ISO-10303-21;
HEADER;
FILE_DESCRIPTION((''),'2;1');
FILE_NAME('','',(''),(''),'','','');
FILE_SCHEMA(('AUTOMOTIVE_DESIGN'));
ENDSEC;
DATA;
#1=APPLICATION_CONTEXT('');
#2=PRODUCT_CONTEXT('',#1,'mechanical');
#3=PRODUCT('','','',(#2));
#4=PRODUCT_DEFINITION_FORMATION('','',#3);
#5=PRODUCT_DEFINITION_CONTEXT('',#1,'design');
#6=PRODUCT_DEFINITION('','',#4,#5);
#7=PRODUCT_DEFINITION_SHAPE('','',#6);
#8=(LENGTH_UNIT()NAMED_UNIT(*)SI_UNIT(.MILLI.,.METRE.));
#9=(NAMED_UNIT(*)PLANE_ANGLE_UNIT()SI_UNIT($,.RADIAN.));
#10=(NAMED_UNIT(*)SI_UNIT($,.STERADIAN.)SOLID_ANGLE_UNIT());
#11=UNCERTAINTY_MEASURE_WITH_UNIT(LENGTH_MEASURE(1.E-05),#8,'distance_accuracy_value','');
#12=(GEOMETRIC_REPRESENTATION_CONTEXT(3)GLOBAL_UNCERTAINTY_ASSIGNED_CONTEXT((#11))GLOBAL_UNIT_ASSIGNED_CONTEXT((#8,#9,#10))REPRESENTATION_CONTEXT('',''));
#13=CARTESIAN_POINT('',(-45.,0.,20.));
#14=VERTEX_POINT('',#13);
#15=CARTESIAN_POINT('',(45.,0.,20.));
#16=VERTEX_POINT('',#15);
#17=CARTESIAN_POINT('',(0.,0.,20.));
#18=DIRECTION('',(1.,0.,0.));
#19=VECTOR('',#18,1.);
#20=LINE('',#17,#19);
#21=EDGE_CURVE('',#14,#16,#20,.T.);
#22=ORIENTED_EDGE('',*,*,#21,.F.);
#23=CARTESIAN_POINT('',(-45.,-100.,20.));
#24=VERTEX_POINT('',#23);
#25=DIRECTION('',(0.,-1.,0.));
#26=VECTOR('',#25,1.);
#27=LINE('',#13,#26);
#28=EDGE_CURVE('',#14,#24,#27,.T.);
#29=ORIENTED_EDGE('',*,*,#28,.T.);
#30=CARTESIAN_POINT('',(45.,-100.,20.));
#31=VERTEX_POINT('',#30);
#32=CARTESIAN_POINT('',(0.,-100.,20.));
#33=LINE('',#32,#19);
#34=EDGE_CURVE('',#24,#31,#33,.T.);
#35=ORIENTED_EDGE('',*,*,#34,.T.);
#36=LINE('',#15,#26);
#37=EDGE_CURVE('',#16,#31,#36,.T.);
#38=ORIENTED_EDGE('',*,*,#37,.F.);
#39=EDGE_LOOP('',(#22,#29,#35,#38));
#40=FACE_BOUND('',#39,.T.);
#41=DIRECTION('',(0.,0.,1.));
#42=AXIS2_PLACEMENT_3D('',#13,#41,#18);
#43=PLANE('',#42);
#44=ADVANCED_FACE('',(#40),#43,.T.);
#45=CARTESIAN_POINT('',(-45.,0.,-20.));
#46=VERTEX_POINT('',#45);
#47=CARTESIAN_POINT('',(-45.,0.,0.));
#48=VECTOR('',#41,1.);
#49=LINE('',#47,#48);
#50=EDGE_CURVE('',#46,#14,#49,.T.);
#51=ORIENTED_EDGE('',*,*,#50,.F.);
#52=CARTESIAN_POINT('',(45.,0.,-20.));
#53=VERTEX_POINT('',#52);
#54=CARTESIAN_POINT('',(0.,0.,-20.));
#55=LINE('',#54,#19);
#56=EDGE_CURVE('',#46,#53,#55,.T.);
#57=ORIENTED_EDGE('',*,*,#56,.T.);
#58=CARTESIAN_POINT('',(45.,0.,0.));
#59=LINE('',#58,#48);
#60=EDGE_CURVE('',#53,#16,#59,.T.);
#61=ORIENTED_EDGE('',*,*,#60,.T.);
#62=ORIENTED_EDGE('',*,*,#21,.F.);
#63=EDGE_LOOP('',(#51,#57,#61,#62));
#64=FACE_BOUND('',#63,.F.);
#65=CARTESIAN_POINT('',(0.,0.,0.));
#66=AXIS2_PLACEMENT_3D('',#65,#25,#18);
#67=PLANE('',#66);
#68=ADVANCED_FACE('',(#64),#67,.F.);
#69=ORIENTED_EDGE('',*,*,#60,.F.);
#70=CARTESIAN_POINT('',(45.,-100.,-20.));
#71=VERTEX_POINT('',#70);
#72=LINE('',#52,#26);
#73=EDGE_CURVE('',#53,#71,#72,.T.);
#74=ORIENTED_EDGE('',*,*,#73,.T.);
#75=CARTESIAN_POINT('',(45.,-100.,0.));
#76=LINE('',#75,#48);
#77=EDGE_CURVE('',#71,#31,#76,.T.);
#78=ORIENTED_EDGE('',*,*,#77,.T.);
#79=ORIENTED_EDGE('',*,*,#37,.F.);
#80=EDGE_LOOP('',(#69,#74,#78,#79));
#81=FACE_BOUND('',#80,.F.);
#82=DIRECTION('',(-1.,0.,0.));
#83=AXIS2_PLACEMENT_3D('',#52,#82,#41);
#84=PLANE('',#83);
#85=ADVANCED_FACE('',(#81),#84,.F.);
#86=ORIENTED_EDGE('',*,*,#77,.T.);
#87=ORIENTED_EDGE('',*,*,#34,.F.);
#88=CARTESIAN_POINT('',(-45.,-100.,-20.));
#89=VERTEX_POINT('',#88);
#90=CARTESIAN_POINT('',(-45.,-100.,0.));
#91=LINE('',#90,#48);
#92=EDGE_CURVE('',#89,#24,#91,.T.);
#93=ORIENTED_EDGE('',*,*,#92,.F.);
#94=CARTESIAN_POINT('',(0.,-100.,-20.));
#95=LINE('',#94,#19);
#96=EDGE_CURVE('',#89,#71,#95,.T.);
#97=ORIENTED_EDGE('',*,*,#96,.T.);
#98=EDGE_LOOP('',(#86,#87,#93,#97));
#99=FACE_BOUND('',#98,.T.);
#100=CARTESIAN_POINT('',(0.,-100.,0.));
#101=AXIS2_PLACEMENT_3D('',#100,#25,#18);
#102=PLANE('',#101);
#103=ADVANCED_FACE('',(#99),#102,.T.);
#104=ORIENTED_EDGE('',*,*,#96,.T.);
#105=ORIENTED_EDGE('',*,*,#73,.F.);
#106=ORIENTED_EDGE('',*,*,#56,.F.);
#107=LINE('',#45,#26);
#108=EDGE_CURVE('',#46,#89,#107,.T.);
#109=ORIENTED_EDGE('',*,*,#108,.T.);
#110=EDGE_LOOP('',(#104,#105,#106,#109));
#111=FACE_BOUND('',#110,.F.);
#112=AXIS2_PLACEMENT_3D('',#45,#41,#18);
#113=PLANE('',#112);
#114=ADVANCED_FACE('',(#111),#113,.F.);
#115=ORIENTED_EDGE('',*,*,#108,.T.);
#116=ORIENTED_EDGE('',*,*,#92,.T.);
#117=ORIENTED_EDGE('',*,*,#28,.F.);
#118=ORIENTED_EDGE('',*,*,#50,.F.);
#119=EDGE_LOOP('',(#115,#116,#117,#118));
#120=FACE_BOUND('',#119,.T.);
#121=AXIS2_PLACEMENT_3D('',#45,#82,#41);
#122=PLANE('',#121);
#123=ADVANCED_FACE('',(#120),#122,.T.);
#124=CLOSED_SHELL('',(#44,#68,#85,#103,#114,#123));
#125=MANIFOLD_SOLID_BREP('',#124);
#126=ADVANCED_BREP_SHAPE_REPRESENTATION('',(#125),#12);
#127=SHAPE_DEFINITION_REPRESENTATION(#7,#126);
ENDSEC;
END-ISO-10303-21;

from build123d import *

# Parameters (mm, degrees)
F0_W     = 90
F0_H     = 40
F1_DEPTH = 100


# Not quite as in the source:
# - a feature names something its author has since deleted; it is built from what else it names


with BuildPart() as f1:
    # F0 (on Front) → F1 (new body)
    with BuildSketch(Plane.XZ):
        Rectangle(F0_W, F0_H)
    extrude(amount=F1_DEPTH)


solid = f1.part
